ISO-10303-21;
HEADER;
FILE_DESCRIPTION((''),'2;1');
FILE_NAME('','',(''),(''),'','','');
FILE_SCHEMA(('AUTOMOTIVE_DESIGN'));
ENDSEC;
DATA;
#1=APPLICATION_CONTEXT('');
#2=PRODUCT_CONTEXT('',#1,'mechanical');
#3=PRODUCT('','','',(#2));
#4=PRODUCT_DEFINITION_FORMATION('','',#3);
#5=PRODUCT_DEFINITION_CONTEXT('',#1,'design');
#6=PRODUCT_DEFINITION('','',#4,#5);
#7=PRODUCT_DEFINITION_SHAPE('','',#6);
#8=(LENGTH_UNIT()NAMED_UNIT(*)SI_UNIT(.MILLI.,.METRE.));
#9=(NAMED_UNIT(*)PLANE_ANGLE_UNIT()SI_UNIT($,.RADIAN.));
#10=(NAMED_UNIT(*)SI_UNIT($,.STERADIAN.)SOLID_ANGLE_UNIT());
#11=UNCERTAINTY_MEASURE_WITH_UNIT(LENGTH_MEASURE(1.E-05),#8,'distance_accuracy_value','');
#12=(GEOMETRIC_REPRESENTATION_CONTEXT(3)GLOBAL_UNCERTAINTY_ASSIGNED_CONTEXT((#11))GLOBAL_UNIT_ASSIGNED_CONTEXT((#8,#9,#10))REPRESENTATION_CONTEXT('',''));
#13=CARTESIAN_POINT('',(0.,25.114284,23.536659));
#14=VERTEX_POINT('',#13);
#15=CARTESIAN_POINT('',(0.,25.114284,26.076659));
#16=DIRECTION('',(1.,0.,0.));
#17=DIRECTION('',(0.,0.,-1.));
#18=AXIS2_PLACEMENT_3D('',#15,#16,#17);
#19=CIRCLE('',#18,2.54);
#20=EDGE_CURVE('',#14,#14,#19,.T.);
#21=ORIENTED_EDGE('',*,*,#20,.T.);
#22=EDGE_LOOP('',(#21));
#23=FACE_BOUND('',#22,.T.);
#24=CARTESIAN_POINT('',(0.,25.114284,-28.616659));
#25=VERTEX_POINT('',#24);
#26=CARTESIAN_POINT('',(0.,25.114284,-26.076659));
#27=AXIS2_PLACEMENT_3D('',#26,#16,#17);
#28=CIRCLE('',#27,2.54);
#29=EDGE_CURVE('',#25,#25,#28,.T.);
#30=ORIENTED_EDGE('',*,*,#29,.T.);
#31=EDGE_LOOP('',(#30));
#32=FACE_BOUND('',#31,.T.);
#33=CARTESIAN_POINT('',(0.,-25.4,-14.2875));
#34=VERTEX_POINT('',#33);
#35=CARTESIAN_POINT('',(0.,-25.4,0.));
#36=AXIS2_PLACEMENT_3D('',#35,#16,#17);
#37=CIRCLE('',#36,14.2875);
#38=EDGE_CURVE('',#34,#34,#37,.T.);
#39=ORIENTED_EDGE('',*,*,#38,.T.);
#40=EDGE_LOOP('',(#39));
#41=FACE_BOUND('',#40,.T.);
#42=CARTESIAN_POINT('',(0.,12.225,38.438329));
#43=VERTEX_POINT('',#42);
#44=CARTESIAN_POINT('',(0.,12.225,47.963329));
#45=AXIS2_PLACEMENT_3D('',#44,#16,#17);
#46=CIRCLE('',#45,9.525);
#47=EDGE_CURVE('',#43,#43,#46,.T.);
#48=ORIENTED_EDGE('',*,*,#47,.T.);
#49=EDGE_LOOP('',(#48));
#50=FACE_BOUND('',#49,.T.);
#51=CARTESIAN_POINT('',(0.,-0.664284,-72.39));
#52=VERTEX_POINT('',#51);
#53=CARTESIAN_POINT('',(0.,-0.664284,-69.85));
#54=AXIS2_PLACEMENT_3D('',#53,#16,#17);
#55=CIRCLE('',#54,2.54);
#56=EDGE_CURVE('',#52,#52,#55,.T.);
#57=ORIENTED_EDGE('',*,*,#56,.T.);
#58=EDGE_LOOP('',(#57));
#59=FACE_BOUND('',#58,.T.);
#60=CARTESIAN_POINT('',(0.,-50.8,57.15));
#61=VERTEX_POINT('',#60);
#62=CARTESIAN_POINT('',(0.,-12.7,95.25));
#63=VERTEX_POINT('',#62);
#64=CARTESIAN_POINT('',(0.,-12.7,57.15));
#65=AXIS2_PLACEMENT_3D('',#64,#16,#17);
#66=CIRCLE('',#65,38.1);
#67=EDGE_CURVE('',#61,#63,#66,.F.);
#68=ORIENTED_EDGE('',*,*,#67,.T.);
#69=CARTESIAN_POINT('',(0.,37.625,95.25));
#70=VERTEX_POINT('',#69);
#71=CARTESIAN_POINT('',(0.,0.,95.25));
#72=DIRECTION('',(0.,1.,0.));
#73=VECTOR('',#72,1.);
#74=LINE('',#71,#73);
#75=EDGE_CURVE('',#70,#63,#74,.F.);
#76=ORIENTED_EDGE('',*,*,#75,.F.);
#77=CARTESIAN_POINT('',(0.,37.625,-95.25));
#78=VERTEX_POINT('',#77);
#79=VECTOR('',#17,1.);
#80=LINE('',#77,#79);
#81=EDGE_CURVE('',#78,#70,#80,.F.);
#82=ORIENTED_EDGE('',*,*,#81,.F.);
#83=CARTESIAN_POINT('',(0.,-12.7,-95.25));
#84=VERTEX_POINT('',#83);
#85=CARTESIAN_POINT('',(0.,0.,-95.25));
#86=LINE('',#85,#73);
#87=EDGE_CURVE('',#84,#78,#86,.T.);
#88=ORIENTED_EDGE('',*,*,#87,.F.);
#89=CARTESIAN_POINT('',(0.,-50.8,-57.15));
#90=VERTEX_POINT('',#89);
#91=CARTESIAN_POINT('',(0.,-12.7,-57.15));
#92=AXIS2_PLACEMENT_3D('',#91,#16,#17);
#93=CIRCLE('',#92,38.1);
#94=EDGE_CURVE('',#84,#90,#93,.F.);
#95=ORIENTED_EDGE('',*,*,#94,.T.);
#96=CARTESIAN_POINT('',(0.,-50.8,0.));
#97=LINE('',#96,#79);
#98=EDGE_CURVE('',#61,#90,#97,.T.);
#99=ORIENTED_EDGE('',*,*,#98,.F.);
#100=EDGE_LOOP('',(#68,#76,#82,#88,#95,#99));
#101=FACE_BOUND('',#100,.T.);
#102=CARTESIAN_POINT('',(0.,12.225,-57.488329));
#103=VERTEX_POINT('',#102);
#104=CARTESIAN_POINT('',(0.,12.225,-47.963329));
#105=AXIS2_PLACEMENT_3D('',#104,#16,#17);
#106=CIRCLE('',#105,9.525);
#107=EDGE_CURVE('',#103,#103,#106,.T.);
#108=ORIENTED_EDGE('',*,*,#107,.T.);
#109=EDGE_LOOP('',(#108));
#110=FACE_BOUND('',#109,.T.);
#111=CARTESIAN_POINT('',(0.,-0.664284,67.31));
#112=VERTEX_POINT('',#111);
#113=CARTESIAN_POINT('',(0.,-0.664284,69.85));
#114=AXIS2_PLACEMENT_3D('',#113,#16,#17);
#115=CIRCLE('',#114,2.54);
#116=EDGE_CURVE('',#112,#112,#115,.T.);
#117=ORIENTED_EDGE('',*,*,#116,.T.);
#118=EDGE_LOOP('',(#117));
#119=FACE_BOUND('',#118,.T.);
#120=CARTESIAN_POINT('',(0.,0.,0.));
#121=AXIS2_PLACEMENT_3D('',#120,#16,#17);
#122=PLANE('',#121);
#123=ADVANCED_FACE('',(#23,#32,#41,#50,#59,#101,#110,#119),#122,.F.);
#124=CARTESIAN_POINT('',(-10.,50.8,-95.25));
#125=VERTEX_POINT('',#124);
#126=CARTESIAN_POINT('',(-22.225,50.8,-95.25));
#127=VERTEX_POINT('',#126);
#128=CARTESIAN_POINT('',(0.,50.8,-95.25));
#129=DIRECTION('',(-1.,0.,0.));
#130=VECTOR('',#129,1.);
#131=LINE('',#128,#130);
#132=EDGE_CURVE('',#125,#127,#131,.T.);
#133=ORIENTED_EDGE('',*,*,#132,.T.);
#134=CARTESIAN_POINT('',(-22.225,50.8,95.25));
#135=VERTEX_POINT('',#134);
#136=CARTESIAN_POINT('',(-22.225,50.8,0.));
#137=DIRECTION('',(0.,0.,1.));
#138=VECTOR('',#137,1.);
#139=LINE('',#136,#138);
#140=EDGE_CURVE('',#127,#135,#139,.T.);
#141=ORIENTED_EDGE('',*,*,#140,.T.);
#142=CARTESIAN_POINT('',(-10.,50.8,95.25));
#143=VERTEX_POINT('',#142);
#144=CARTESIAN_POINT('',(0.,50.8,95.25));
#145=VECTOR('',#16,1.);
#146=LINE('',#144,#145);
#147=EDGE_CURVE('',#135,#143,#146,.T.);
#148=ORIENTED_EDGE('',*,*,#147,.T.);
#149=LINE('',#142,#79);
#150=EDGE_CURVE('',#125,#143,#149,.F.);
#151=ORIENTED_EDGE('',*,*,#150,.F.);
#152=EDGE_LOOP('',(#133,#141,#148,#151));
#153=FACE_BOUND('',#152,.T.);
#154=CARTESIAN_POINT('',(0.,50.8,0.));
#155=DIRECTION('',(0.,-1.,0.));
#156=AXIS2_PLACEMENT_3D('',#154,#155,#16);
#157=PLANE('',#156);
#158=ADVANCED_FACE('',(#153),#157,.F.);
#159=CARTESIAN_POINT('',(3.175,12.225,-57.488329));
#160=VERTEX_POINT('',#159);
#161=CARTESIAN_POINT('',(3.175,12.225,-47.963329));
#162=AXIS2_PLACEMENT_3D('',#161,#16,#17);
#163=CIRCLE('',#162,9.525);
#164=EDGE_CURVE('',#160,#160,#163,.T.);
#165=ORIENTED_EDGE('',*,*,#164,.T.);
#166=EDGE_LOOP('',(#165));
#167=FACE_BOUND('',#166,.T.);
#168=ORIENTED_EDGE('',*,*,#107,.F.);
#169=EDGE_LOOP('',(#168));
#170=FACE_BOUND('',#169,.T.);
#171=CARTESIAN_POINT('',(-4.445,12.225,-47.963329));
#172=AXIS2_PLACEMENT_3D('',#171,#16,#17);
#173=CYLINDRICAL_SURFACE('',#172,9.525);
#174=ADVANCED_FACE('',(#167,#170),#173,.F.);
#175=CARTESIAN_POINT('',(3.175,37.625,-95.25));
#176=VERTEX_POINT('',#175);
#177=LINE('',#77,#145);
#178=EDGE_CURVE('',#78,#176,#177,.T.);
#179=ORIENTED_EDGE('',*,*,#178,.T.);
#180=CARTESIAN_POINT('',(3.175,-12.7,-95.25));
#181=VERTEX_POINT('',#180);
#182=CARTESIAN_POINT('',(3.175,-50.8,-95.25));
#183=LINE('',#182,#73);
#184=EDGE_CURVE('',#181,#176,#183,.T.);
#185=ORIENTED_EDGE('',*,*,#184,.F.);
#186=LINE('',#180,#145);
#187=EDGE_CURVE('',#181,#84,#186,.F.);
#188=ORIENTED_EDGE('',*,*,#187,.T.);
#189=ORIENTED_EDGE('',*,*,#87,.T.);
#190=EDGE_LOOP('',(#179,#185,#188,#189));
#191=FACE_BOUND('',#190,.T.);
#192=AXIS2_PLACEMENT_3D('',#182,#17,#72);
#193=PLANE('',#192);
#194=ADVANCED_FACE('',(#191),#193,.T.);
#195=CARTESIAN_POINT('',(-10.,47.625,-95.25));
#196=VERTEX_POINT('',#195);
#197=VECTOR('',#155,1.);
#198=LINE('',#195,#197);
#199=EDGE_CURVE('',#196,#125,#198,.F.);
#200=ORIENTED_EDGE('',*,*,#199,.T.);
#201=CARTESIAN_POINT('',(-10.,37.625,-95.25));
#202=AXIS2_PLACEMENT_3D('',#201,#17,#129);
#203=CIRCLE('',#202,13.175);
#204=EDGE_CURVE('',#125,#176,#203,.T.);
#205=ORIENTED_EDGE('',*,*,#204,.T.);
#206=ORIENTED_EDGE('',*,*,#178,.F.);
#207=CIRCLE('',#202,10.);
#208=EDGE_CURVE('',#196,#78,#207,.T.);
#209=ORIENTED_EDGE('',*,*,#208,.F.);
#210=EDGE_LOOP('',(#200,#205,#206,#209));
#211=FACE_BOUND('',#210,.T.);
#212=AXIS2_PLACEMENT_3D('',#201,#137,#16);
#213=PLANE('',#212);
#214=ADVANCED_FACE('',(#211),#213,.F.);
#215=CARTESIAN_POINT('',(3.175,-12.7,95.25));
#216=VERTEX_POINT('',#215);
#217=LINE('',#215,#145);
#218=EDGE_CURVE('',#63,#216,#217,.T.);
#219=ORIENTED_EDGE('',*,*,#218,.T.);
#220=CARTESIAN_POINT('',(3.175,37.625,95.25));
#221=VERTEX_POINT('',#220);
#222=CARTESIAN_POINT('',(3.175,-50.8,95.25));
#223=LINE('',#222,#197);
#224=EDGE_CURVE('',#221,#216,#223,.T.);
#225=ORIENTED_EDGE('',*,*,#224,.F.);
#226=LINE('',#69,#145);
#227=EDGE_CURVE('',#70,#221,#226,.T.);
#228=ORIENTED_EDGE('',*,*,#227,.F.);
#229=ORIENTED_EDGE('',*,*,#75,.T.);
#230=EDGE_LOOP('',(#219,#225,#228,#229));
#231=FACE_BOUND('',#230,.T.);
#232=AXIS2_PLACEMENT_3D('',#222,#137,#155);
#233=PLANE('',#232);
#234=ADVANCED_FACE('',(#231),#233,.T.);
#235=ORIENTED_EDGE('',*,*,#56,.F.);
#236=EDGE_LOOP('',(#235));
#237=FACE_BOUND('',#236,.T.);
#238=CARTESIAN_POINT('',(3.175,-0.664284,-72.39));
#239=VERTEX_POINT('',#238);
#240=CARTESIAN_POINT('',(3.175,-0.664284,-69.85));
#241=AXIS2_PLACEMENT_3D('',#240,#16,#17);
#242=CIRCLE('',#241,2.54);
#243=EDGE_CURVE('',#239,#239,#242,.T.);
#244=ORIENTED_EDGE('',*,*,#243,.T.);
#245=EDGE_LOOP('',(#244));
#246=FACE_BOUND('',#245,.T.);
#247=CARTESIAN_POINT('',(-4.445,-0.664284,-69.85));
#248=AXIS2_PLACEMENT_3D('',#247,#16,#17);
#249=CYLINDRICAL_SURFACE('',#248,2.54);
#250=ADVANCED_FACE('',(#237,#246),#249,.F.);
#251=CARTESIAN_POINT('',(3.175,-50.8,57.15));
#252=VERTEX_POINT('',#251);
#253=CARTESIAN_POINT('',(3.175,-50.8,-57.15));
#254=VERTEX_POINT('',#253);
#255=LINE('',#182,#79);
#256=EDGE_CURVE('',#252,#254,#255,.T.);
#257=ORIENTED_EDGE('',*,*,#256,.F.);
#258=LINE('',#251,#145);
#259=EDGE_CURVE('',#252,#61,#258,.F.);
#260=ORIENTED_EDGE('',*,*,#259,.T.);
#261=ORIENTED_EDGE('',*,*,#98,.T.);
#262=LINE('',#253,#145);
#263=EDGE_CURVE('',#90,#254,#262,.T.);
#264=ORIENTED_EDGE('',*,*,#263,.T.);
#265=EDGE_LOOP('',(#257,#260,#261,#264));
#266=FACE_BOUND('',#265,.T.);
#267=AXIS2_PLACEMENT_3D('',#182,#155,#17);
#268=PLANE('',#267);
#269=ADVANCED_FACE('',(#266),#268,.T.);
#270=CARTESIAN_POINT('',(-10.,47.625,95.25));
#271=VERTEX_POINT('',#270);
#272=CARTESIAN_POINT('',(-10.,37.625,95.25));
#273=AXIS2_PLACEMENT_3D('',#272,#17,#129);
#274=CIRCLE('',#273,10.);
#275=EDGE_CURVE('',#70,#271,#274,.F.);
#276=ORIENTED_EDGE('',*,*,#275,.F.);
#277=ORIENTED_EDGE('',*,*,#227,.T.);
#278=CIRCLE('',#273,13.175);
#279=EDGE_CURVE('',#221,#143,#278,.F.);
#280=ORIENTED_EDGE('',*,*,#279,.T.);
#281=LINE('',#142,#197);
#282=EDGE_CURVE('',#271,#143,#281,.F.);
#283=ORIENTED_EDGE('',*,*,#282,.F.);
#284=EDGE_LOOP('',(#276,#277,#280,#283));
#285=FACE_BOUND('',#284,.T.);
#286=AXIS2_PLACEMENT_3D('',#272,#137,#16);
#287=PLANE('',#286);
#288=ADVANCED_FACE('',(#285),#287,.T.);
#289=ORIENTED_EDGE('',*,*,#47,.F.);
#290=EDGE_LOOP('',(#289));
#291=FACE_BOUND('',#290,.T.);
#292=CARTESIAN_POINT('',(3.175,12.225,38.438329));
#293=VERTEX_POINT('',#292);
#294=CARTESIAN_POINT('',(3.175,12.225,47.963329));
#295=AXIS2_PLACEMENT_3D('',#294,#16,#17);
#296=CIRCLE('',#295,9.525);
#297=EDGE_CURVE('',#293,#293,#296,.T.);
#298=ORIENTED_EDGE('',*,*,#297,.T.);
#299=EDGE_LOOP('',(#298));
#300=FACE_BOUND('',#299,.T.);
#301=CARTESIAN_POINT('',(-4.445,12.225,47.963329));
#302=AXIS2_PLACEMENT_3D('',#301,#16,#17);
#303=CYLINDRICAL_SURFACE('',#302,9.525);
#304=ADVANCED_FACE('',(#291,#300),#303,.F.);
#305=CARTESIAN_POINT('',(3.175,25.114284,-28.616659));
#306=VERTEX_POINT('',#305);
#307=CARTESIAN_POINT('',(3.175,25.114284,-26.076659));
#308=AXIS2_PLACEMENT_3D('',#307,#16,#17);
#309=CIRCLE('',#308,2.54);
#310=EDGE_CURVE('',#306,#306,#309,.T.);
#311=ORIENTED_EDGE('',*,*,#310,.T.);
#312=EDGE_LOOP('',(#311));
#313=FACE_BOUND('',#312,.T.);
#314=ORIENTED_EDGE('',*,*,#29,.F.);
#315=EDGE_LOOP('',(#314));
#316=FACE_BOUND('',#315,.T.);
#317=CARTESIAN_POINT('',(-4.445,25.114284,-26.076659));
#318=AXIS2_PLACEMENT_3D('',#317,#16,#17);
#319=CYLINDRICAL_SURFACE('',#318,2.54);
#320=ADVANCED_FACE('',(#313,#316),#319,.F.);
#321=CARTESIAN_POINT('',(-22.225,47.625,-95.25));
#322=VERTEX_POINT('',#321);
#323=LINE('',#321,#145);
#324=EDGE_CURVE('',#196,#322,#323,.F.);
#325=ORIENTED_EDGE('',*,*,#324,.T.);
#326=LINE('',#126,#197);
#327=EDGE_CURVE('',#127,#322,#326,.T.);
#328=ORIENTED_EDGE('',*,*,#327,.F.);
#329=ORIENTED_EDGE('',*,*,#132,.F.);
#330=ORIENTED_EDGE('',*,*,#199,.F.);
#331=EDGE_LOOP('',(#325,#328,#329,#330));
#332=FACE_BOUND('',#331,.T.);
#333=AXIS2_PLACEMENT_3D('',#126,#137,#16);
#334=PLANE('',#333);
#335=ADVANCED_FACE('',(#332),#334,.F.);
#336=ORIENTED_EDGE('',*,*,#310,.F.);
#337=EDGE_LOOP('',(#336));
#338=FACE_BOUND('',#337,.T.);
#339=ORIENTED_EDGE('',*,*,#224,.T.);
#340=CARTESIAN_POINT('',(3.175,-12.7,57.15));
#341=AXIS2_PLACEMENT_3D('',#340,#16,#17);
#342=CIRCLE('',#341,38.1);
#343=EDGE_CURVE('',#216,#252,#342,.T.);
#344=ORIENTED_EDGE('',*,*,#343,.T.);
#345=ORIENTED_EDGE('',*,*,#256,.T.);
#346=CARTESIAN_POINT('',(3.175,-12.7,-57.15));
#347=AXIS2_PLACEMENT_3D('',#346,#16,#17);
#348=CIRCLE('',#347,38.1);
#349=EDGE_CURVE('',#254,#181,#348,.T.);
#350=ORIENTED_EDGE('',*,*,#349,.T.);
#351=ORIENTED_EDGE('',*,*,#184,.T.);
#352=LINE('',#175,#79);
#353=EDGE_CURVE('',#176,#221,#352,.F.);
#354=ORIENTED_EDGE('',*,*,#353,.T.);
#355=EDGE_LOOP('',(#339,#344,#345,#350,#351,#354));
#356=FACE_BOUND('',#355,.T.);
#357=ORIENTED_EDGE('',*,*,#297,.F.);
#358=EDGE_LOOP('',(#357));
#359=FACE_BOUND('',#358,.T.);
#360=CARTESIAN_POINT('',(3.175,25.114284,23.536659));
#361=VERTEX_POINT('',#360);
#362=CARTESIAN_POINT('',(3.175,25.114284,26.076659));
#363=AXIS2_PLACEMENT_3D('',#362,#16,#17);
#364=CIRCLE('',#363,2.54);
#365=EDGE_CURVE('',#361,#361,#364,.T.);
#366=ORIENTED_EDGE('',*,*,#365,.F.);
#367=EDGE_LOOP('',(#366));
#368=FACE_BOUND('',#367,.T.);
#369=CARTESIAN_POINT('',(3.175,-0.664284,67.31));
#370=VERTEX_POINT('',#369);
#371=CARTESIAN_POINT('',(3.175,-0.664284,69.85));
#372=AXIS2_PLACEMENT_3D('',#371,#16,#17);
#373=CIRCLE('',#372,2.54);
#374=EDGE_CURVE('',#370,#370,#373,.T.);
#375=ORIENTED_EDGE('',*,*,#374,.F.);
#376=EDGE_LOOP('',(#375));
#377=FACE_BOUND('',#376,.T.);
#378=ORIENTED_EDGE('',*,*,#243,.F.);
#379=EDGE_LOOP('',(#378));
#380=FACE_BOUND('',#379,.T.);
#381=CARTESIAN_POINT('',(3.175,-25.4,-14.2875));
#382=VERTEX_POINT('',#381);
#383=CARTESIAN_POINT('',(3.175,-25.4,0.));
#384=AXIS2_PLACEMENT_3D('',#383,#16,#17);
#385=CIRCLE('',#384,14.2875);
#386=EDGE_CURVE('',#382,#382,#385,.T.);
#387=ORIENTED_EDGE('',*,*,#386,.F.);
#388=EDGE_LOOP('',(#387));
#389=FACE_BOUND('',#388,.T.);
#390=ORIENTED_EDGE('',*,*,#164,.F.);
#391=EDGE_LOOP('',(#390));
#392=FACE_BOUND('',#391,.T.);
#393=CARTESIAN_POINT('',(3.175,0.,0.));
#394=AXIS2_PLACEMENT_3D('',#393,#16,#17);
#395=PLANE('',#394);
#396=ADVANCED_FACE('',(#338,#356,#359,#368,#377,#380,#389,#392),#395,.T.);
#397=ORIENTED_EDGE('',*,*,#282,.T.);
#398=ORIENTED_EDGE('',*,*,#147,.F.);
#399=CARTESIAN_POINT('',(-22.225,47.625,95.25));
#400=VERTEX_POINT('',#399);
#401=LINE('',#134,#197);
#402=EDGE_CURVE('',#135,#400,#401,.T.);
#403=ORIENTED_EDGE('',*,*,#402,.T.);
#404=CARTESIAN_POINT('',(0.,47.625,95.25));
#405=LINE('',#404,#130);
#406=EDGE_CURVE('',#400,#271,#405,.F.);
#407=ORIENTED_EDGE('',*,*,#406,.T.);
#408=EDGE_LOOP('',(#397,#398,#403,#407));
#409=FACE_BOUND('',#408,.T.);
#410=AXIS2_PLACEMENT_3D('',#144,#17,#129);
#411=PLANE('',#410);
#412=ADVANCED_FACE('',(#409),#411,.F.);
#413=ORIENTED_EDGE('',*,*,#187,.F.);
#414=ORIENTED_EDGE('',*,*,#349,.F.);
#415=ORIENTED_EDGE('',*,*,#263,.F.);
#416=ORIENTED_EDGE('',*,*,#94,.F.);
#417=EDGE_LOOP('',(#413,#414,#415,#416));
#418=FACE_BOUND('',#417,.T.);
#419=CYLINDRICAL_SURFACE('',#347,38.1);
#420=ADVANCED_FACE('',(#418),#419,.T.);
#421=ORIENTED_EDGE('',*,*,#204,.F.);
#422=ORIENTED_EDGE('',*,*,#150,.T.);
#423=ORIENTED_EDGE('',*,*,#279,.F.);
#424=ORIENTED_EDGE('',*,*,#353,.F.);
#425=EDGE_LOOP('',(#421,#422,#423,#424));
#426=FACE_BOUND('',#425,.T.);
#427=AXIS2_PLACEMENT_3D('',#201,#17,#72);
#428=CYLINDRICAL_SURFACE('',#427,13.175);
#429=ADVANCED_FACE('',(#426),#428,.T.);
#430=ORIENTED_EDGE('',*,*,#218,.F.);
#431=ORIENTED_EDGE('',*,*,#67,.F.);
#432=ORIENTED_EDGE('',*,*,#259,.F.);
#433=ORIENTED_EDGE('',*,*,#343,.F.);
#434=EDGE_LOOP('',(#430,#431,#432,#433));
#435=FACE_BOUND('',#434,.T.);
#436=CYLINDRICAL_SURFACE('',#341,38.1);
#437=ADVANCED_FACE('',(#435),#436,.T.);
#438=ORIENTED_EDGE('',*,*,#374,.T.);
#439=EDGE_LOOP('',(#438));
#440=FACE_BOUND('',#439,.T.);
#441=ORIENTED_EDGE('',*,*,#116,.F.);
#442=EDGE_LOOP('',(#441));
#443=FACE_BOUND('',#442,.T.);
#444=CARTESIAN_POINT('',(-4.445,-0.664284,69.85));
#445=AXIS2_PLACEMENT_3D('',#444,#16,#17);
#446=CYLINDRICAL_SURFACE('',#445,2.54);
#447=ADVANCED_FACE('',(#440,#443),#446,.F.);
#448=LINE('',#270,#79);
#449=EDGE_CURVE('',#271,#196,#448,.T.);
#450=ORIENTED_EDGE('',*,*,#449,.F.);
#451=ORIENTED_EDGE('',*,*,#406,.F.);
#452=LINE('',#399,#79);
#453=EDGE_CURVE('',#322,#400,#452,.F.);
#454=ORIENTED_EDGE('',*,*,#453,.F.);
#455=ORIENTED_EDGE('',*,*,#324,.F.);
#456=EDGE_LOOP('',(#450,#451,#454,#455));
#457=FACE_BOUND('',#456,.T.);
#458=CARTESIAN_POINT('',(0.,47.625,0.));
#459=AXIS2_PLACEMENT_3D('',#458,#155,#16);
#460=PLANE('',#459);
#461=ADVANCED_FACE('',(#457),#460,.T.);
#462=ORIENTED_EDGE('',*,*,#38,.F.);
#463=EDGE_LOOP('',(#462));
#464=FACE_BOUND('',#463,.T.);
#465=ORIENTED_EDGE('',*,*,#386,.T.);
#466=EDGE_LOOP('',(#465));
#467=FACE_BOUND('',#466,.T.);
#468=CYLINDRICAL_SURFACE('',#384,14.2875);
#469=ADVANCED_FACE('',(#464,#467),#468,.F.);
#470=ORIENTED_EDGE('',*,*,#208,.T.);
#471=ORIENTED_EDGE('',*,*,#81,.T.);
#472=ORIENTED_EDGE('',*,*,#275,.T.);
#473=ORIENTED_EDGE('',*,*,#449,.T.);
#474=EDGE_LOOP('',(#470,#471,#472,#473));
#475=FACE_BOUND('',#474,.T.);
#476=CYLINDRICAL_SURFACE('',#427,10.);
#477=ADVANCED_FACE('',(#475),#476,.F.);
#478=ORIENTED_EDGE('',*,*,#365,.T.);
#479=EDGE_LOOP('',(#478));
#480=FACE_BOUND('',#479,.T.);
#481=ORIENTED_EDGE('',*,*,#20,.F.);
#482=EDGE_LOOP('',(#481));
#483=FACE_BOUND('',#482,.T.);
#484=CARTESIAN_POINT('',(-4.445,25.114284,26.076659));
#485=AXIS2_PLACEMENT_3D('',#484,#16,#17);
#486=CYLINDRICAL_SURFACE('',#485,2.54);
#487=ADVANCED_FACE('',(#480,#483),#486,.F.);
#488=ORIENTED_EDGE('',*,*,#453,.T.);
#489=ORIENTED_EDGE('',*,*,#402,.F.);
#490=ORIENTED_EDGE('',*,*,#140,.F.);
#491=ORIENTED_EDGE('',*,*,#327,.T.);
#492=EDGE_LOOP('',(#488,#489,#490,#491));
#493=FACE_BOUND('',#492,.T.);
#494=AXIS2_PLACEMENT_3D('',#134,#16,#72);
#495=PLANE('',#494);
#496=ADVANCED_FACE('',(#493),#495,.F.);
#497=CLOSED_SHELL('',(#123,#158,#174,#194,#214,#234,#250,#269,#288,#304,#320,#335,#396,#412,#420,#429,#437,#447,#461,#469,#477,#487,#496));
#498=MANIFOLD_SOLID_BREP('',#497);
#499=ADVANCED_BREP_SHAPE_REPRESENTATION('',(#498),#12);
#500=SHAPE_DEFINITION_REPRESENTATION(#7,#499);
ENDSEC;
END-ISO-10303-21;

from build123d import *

# Parameters (mm, degrees)
SKETCH1_W                    = 190.5
SKETCH1_H                    = 101.6
BOSS_EXTRUDE1_DEPTH          = 3.175
SKETCH2_R                    = 14.2875
CUT_EXTRUDE1_DEPTH           = 3.175
EDGE_FLANGE1_STRIP_W         = 32.7
EDGE_FLANGE1_STRIP_H         = 3.175
EDGE_FLANGE1_STRIP_CUT_DEPTH = 190.5
EDGE_FLANGE1_DEPTH           = 190.5
SKETCH12_R                   = 9.525
SKETCH12_R_2                 = 2.54
CUT_EXTRUDE2_DEPTH           = 7.62
FILLET1_R                    = 38.1


# Sheet-metal steps are written as plain solids
with BuildPart() as part:
    # Sketch1 → Boss-Extrude1 (new body)
    with BuildSketch(Plane(origin=(0, 0, 0), x_dir=(0, 0, -1), z_dir=(1, 0, 0))):
        Rectangle(SKETCH1_W, SKETCH1_H)
    extrude(amount=BOSS_EXTRUDE1_DEPTH)

    # Sketch2 → Cut-Extrude1 (cut)
    with BuildSketch(Plane(origin=(3.175, 0, 0), x_dir=(0, 0, -1), z_dir=(1, 0, 0))):
        with Locations((0, -25.4)):
            Circle(SKETCH2_R)
    extrude(amount=-CUT_EXTRUDE1_DEPTH, mode=Mode.SUBTRACT)

    # Edge-Flange1 strip (across the edge) → Edge-Flange1 strip cut (cut)
    with BuildSketch(Plane(origin=(0, 50.8, 95.25), x_dir=(0, -1, 0), z_dir=(0, 0, -1))):
        with Locations((-3.175, -1.5875)):
            Rectangle(EDGE_FLANGE1_STRIP_W, EDGE_FLANGE1_STRIP_H)
    extrude(amount=EDGE_FLANGE1_STRIP_CUT_DEPTH, mode=Mode.SUBTRACT)

    # Edge-Flange1 section (across the edge) → Edge-Flange1 (add)
    with BuildSketch(Plane(origin=(0, 50.8, 95.25), x_dir=(0, -1, 0), z_dir=(0, 0, -1))):
        with BuildLine():
            Line((0, 10), (0, 22.225))
            Line((0, 22.225), (3.175, 22.225))
            Line((3.175, 22.225), (3.175, 10))
            ThreePointArc((3.175, 10), (6.103932188, 2.928932188), (13.175, 0))
            Line((13.175, 0), (13.175, -3.175))
            ThreePointArc((13.175, -3.175), (3.858868158, 0.683868158), (0, 10))
        make_face()
    extrude(amount=EDGE_FLANGE1_DEPTH)

    # Sketch12 → Cut-Extrude2 (cut)
    with BuildSketch(Plane(origin=(3.175, 0, 0), x_dir=(0, 0, -1), z_dir=(1, 0, 0))):
        with Locations((-47.963329482, 12.225)):
            Circle(SKETCH12_R)
        with Locations((-26.076658964, 25.11428445)):
            Circle(SKETCH12_R_2)
        with Locations((-69.85, -0.66428445)):
            Circle(SKETCH12_R_2)
        with Locations((47.963329482, 12.225)):
            Circle(SKETCH12_R)
        with Locations((26.076658964, 25.11428445)):
            Circle(SKETCH12_R_2)
        with Locations((69.85, -0.66428445)):
            Circle(SKETCH12_R_2)
    extrude(amount=-CUT_EXTRUDE2_DEPTH, mode=Mode.SUBTRACT)

    # Fillet1
    fillet1_edges = [part.edges().sort_by_distance(p)[0] for p in [
        (1.5875, -50.8, 95.25),
        (1.5875, -50.8, -95.25),
    ]]
    fillet(fillet1_edges, radius=FILLET1_R)


solid = part.part
